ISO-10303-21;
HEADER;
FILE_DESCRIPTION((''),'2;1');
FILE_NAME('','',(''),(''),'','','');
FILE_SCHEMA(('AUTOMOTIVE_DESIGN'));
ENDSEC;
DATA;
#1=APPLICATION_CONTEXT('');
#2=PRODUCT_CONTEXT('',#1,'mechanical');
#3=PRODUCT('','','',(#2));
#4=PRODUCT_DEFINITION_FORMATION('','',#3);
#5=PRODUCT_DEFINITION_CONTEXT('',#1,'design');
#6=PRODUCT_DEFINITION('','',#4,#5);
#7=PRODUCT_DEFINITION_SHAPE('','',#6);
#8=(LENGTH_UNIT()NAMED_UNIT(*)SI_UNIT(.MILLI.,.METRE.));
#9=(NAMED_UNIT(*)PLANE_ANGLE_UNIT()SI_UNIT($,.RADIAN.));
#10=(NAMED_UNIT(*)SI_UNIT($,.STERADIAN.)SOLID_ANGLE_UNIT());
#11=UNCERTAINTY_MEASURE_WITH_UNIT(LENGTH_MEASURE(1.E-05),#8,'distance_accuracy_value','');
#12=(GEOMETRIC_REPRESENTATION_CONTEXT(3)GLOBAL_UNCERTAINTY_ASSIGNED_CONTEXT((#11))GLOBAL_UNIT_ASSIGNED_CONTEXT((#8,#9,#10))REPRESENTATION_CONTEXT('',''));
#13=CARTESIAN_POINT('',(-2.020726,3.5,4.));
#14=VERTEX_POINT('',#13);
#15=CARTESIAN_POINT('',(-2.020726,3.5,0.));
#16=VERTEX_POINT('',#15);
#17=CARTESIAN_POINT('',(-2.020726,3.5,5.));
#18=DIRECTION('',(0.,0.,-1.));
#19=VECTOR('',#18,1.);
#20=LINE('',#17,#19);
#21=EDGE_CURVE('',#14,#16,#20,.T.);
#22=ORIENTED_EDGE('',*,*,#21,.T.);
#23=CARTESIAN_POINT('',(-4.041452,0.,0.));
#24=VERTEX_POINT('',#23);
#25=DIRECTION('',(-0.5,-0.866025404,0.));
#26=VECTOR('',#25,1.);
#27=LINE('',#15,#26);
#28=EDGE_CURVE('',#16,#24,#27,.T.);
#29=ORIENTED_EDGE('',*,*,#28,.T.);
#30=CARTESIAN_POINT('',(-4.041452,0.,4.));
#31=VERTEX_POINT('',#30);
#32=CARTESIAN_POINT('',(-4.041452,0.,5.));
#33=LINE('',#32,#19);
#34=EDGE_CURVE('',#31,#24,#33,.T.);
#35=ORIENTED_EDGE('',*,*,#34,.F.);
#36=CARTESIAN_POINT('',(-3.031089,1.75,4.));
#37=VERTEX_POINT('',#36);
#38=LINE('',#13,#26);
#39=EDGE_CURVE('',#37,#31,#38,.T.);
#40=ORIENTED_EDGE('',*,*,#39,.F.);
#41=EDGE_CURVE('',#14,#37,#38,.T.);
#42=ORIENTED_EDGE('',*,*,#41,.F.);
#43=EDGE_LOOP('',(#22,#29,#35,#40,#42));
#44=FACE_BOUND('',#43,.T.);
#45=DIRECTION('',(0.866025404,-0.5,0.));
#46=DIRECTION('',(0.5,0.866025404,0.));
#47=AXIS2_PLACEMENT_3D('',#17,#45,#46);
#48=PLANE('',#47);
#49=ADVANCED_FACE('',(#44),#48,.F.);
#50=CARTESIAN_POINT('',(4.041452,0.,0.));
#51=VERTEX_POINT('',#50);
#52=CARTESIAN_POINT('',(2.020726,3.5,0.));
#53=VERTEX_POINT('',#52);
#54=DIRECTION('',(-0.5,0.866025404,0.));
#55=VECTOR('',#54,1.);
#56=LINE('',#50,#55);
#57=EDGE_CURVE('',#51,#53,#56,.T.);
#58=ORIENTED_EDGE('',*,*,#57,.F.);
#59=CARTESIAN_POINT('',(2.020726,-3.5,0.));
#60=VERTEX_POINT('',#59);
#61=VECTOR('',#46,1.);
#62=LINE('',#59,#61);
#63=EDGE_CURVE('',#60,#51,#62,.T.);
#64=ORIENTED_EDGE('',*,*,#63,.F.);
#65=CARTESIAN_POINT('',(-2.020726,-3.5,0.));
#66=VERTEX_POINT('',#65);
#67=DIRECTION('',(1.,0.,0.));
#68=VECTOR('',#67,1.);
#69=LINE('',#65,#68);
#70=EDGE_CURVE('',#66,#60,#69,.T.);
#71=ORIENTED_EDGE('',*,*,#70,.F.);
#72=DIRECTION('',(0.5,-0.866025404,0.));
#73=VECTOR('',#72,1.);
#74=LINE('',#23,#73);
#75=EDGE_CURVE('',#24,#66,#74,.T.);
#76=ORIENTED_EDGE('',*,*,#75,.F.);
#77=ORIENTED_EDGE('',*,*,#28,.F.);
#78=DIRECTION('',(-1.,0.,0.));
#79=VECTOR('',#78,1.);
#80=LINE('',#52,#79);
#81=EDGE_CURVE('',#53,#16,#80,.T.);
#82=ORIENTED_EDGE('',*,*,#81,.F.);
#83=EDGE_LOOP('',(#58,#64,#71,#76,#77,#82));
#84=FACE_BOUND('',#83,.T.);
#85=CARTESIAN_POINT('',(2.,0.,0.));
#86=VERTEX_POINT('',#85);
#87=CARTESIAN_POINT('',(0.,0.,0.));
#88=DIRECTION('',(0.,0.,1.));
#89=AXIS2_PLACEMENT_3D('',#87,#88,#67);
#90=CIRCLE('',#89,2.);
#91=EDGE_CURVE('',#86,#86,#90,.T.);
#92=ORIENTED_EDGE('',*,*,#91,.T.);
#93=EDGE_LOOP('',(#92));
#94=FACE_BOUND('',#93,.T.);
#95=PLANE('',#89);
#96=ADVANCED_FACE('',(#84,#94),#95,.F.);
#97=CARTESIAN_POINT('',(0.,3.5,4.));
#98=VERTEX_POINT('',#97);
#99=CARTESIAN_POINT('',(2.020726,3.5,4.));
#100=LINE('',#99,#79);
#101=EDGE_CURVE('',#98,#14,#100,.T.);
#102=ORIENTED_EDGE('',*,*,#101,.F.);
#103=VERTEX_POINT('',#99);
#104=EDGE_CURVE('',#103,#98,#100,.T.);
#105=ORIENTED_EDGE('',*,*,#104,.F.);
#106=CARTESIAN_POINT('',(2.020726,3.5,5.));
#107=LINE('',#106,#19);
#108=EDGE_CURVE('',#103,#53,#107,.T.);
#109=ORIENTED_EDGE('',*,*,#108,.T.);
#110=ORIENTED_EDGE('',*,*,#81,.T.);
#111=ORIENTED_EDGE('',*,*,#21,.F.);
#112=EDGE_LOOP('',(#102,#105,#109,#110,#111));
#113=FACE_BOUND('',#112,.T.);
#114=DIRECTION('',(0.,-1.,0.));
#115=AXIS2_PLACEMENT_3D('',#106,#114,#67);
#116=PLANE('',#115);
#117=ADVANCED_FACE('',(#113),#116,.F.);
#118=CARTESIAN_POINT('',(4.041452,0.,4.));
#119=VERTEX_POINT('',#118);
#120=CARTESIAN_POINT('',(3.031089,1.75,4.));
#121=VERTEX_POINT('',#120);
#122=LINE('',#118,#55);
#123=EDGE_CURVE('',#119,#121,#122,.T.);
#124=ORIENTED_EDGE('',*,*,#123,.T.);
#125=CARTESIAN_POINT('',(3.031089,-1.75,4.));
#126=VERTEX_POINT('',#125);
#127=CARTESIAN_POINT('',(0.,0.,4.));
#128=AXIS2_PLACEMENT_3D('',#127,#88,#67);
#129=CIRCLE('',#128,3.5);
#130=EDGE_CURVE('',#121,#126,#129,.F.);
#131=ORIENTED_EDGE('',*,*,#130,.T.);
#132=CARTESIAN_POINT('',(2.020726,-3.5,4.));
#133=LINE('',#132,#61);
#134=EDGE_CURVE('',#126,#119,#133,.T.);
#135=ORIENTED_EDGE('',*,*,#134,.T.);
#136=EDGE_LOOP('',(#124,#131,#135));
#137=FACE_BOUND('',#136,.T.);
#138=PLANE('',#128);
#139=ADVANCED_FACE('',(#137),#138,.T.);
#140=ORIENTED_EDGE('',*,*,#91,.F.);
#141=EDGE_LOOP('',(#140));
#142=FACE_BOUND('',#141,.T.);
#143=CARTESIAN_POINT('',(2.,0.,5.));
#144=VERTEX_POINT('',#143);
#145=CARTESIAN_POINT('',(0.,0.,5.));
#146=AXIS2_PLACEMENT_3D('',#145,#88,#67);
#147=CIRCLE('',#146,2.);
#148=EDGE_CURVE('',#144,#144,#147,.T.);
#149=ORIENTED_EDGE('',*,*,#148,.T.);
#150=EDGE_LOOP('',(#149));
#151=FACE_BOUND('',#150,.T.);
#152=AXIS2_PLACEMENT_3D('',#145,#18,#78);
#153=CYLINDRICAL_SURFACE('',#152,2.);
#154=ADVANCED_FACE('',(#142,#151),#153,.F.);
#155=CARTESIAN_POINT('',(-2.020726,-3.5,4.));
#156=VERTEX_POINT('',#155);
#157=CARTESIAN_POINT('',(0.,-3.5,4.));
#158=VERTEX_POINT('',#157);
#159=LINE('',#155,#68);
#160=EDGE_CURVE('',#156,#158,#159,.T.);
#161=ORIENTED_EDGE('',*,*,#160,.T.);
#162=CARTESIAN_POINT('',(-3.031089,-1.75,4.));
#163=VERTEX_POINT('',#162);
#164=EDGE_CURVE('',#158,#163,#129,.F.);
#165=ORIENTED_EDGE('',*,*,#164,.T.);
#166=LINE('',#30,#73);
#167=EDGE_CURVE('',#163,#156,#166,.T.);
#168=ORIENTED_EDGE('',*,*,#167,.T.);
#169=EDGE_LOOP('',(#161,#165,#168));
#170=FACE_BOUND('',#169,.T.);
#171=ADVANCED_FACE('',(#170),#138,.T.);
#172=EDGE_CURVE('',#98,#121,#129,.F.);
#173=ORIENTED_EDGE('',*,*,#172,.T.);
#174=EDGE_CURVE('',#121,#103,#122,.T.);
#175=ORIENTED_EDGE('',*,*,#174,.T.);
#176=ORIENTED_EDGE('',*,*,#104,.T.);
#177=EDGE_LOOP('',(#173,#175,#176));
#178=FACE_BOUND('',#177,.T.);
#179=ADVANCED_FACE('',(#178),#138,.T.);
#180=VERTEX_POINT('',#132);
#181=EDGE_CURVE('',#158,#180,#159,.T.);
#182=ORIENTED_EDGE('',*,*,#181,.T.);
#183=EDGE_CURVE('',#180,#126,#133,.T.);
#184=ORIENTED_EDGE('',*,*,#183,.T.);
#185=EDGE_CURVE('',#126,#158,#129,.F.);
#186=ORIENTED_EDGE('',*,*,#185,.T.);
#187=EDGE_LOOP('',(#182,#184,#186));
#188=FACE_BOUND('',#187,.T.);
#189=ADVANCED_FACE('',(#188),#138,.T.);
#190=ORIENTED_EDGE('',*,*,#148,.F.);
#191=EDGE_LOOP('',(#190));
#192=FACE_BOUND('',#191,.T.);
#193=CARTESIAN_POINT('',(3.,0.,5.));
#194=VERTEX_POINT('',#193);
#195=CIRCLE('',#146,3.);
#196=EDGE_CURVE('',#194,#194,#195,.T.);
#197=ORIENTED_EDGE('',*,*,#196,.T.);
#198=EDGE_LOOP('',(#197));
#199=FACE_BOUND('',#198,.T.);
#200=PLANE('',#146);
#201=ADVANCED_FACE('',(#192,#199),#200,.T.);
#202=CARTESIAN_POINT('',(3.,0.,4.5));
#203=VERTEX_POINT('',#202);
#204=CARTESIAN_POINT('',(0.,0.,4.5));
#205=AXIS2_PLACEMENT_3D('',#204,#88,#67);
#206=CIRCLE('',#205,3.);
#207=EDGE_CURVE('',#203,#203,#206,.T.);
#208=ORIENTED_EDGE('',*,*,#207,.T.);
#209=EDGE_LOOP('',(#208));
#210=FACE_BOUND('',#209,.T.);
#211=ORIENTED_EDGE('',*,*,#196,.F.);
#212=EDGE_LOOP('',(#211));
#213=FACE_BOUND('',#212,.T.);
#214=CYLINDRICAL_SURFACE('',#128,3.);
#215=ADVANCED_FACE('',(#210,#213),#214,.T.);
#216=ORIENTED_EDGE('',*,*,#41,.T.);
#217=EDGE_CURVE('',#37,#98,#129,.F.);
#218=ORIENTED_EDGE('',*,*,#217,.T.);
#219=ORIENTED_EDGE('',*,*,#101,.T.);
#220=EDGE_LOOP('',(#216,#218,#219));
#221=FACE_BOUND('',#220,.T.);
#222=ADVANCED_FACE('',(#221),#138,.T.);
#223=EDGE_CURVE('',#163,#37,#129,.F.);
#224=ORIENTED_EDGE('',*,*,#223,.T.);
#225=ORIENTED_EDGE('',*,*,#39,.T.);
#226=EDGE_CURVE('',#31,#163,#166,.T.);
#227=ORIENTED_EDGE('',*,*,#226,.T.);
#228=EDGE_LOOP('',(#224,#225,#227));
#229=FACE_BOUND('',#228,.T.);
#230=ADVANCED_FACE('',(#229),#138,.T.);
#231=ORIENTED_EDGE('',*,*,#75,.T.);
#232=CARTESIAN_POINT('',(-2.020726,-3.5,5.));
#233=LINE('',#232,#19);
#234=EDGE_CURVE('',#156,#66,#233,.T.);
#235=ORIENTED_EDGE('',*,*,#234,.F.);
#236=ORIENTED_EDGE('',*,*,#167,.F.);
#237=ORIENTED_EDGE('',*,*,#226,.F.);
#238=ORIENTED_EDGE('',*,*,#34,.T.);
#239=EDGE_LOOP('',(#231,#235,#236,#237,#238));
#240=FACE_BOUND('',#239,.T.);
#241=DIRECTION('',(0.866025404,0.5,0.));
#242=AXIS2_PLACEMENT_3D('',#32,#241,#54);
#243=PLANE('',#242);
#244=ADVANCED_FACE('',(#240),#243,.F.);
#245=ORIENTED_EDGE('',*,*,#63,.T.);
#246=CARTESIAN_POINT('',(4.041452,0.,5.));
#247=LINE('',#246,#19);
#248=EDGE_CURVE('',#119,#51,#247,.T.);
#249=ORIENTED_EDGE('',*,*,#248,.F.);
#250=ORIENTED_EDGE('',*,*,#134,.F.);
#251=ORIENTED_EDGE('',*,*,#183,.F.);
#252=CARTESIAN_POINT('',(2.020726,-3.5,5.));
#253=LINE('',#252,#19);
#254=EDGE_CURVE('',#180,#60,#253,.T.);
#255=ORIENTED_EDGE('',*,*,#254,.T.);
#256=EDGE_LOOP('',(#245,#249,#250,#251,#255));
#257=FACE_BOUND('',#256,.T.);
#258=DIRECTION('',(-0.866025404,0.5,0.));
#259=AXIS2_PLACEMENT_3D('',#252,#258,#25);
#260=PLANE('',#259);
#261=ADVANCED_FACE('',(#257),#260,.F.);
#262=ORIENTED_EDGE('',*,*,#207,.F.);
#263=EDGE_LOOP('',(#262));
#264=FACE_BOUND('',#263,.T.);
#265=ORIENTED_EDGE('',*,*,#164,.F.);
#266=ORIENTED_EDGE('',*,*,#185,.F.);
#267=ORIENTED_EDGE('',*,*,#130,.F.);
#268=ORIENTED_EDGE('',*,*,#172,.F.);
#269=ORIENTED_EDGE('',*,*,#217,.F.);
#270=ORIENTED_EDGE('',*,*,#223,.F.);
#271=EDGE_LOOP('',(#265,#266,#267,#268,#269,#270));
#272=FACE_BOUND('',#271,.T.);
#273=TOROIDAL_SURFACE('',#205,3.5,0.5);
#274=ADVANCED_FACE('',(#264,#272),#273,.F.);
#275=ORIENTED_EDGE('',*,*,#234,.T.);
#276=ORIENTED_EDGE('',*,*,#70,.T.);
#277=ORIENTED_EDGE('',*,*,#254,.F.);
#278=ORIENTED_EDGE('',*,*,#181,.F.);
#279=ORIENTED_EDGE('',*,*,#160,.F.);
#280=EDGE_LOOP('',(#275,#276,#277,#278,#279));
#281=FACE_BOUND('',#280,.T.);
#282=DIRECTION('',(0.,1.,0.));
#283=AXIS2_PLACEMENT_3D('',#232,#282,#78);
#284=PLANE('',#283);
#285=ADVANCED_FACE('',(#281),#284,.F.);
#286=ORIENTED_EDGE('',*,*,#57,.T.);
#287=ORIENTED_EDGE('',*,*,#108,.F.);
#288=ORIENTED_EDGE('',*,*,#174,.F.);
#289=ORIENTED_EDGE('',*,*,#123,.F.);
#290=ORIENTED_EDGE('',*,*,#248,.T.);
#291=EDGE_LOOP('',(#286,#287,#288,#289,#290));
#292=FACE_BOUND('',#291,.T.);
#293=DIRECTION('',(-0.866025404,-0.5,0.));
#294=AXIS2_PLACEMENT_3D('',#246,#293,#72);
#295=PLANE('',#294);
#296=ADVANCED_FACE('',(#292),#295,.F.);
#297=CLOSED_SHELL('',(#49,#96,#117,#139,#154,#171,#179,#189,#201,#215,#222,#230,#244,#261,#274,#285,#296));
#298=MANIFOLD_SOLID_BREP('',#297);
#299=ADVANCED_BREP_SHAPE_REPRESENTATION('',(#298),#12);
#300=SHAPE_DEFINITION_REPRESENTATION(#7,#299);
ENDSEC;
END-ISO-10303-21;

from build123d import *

# Parameters (mm, degrees)
SKETCH_1_R          = 2
EXTRUDE_1_DEPTH     = 5
SKETCH_2_R          = 3
CUT_EXTRUDE_1_DEPTH = 1
FILLET_1_R          = 0.5


with BuildPart() as part:
    # 草图1 → 凸台-拉伸1 (new body)
    with BuildSketch(Plane.XY):
        Polygon((4.041451884, 0), (2.020725942, 3.5), (-2.020725942, 3.5), (-4.041451884, 0), (-2.020725942, -3.5), (2.020725942, -3.5), align=None)
        Circle(SKETCH_1_R, mode=Mode.SUBTRACT)
    extrude(amount=EXTRUDE_1_DEPTH)

    # 草图2 → 切除-拉伸1 (cut)
    with BuildSketch(Plane.XY.offset(5)):
        Polygon((4.041451884, 0), (2.020725942, 3.5), (-2.020725942, 3.5), (-4.041451884, 0), (-2.020725942, -3.5), (2.020725942, -3.5), align=None)
        Circle(SKETCH_2_R, mode=Mode.SUBTRACT)
    extrude(amount=-CUT_EXTRUDE_1_DEPTH, mode=Mode.SUBTRACT)

    # 圆角1
    fillet_1_edges = [part.edges().sort_by_distance(p)[0] for p in [
        (-3, 0, 4),
    ]]
    fillet(fillet_1_edges, radius=FILLET_1_R - 0.0001)  # a hair under: the kernel refuses the full size


solid = part.part
